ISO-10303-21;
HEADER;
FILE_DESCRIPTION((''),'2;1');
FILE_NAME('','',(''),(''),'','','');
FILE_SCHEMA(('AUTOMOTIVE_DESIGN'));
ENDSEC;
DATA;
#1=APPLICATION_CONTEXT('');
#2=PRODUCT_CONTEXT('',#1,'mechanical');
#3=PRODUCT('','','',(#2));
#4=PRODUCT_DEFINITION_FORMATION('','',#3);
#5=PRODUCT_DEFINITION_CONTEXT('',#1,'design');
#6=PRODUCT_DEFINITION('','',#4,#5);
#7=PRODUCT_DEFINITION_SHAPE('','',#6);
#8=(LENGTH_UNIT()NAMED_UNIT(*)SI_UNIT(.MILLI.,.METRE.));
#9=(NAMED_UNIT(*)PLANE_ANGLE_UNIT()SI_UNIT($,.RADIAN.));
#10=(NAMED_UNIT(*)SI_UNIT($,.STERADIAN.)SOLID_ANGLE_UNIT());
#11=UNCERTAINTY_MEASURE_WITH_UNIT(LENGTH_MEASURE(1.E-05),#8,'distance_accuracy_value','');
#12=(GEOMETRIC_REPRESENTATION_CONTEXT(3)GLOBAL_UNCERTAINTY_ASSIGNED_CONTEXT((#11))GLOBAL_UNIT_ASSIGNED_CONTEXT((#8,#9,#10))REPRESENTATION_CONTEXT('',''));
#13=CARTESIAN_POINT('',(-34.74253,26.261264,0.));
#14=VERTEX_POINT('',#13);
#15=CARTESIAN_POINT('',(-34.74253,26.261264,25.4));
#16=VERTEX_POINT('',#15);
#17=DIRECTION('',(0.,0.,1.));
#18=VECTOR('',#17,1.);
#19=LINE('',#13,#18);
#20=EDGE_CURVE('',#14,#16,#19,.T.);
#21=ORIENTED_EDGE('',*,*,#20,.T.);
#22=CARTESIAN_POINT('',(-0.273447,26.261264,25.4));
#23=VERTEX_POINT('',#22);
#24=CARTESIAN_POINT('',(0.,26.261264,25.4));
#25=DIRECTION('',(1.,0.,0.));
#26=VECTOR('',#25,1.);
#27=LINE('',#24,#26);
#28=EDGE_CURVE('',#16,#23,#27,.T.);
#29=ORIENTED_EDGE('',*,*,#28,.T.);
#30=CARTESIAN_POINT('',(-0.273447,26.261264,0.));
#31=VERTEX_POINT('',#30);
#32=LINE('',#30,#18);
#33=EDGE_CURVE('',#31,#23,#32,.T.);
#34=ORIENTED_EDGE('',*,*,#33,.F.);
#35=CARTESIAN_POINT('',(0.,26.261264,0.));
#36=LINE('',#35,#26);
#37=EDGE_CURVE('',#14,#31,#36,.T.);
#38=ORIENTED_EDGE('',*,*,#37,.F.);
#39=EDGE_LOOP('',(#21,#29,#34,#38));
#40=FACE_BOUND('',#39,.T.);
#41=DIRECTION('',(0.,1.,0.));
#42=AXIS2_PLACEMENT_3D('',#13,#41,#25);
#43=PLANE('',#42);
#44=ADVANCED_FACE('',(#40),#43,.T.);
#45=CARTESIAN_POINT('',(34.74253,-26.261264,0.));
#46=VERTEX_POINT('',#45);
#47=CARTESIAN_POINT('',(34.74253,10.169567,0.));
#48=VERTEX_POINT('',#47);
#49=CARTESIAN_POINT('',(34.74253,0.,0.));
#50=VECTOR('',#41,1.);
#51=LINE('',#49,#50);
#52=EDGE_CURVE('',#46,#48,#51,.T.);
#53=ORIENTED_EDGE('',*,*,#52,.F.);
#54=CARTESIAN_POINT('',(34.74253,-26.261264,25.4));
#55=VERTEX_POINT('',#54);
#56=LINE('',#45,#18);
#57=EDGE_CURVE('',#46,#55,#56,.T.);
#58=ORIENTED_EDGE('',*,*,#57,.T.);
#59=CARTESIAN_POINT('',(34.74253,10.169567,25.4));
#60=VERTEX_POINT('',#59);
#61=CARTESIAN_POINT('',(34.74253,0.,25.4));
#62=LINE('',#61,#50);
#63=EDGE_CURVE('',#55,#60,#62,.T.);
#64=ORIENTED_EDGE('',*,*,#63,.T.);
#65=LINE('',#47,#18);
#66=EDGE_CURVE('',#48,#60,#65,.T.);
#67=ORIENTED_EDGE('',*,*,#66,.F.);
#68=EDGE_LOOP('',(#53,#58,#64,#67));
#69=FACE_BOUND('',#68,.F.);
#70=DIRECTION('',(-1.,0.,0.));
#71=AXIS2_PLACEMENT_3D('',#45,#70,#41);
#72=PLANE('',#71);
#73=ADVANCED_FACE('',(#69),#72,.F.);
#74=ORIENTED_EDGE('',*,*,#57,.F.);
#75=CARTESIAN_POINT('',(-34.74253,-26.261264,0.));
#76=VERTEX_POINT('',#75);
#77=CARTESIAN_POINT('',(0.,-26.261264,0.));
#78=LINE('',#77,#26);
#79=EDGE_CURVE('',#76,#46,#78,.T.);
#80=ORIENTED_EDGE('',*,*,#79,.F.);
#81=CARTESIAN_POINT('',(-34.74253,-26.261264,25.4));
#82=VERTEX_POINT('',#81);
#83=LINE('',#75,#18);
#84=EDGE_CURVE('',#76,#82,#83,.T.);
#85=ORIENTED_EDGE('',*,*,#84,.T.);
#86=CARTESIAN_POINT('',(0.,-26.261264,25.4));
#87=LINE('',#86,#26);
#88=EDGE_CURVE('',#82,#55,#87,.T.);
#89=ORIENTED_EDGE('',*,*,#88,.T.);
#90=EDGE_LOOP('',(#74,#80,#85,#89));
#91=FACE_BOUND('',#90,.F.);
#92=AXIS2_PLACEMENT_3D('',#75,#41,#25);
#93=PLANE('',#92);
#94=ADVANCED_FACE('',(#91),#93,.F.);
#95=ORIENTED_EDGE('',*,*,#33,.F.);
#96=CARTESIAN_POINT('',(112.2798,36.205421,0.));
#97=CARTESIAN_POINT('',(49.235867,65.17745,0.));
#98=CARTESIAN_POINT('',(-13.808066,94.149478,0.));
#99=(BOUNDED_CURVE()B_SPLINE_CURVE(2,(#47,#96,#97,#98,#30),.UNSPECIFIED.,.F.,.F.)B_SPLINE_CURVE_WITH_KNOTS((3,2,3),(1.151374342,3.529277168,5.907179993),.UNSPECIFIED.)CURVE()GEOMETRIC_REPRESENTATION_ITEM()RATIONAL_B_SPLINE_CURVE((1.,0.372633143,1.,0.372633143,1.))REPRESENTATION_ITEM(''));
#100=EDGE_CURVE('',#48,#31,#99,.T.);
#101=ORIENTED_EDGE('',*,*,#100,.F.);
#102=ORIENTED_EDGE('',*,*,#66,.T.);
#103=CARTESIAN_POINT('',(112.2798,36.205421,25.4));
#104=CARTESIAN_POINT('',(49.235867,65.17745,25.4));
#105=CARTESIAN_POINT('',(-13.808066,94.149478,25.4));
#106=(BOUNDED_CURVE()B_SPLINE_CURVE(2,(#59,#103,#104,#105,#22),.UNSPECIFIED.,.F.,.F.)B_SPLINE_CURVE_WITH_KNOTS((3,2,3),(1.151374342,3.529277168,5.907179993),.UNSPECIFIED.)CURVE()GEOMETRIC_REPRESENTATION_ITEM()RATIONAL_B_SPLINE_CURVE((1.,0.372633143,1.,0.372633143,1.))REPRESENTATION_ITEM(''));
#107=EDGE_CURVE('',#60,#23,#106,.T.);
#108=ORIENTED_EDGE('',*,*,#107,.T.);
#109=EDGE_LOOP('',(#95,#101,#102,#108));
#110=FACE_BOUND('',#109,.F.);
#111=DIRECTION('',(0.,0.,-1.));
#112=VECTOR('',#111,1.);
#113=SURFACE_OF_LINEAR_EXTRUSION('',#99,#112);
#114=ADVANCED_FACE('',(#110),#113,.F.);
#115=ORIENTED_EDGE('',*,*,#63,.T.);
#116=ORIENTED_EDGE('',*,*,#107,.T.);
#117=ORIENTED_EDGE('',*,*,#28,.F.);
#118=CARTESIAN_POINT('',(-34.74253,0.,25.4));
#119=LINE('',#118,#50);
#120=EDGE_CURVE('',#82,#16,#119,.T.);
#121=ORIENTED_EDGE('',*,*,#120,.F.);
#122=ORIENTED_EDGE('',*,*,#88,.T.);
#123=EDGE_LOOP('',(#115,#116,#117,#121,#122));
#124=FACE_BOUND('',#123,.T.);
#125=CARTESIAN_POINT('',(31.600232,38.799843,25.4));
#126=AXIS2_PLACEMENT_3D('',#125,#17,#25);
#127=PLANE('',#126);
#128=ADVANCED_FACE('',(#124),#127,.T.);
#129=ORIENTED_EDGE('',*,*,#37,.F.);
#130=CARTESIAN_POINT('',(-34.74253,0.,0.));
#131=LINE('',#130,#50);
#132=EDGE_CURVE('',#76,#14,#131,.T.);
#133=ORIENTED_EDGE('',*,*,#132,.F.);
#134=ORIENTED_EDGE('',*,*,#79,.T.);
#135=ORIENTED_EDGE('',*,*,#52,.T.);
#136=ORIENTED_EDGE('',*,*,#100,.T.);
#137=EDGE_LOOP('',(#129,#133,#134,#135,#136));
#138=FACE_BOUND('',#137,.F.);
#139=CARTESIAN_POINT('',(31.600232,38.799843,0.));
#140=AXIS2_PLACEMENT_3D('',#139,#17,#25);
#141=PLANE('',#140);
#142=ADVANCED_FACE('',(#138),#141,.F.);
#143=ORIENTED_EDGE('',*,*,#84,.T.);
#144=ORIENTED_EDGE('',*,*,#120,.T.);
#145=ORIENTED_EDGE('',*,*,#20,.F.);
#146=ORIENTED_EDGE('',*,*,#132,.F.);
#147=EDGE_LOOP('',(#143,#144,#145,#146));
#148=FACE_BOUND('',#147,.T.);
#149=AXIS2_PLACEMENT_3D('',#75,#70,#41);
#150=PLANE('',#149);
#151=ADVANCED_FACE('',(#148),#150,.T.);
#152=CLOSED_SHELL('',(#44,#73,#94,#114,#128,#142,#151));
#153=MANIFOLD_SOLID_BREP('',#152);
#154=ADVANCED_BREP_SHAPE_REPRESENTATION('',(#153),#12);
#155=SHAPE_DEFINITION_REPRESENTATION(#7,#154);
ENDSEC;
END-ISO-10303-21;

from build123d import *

# Parameters (mm, degrees)
F0_W     = 69.4850608706
F0_H     = 52.5225289166
F4_DEPTH = 25.4
F5_DEPTH = 25.4


# Not quite as in the source:
# - the program builds the solid bodies; features that only make, move or delete a surface that nothing else refers to are left out


with BuildPart() as f4:
    # F0 (on Top) → F4 (new body)
    with BuildSketch(Plane.XY):
        Rectangle(F0_W, F0_H)
    extrude(amount=F4_DEPTH)

    # F3 (on face) → F5 (join)
    with BuildSketch(Plane.XY):
        with BuildLine():
            Line((34.7425304353, 26.2612644583), (34.7425304353, 10.1695671882))
            add(Edge.make_bspline(
                [(34.7425304353, 10.1695671882), (112.2797997443, 36.2054211909), (49.2358666955, 65.1774495788), (-13.8080663534, 94.1494779666), (-0.2734467602, 26.2612644583)],
                knots=[1.1513743417, 1.1513743417, 1.1513743417, 3.5292771676, 3.5292771676, 5.9071799934, 5.9071799934, 5.9071799934], degree=2, weights=[1, 0.3726331435, 1, 0.3726331435, 1]))
            Line((-0.2734467602, 26.2612644583), (34.7425304353, 26.2612644583))
        make_face()
    extrude(amount=F5_DEPTH)


solid = f4.part
